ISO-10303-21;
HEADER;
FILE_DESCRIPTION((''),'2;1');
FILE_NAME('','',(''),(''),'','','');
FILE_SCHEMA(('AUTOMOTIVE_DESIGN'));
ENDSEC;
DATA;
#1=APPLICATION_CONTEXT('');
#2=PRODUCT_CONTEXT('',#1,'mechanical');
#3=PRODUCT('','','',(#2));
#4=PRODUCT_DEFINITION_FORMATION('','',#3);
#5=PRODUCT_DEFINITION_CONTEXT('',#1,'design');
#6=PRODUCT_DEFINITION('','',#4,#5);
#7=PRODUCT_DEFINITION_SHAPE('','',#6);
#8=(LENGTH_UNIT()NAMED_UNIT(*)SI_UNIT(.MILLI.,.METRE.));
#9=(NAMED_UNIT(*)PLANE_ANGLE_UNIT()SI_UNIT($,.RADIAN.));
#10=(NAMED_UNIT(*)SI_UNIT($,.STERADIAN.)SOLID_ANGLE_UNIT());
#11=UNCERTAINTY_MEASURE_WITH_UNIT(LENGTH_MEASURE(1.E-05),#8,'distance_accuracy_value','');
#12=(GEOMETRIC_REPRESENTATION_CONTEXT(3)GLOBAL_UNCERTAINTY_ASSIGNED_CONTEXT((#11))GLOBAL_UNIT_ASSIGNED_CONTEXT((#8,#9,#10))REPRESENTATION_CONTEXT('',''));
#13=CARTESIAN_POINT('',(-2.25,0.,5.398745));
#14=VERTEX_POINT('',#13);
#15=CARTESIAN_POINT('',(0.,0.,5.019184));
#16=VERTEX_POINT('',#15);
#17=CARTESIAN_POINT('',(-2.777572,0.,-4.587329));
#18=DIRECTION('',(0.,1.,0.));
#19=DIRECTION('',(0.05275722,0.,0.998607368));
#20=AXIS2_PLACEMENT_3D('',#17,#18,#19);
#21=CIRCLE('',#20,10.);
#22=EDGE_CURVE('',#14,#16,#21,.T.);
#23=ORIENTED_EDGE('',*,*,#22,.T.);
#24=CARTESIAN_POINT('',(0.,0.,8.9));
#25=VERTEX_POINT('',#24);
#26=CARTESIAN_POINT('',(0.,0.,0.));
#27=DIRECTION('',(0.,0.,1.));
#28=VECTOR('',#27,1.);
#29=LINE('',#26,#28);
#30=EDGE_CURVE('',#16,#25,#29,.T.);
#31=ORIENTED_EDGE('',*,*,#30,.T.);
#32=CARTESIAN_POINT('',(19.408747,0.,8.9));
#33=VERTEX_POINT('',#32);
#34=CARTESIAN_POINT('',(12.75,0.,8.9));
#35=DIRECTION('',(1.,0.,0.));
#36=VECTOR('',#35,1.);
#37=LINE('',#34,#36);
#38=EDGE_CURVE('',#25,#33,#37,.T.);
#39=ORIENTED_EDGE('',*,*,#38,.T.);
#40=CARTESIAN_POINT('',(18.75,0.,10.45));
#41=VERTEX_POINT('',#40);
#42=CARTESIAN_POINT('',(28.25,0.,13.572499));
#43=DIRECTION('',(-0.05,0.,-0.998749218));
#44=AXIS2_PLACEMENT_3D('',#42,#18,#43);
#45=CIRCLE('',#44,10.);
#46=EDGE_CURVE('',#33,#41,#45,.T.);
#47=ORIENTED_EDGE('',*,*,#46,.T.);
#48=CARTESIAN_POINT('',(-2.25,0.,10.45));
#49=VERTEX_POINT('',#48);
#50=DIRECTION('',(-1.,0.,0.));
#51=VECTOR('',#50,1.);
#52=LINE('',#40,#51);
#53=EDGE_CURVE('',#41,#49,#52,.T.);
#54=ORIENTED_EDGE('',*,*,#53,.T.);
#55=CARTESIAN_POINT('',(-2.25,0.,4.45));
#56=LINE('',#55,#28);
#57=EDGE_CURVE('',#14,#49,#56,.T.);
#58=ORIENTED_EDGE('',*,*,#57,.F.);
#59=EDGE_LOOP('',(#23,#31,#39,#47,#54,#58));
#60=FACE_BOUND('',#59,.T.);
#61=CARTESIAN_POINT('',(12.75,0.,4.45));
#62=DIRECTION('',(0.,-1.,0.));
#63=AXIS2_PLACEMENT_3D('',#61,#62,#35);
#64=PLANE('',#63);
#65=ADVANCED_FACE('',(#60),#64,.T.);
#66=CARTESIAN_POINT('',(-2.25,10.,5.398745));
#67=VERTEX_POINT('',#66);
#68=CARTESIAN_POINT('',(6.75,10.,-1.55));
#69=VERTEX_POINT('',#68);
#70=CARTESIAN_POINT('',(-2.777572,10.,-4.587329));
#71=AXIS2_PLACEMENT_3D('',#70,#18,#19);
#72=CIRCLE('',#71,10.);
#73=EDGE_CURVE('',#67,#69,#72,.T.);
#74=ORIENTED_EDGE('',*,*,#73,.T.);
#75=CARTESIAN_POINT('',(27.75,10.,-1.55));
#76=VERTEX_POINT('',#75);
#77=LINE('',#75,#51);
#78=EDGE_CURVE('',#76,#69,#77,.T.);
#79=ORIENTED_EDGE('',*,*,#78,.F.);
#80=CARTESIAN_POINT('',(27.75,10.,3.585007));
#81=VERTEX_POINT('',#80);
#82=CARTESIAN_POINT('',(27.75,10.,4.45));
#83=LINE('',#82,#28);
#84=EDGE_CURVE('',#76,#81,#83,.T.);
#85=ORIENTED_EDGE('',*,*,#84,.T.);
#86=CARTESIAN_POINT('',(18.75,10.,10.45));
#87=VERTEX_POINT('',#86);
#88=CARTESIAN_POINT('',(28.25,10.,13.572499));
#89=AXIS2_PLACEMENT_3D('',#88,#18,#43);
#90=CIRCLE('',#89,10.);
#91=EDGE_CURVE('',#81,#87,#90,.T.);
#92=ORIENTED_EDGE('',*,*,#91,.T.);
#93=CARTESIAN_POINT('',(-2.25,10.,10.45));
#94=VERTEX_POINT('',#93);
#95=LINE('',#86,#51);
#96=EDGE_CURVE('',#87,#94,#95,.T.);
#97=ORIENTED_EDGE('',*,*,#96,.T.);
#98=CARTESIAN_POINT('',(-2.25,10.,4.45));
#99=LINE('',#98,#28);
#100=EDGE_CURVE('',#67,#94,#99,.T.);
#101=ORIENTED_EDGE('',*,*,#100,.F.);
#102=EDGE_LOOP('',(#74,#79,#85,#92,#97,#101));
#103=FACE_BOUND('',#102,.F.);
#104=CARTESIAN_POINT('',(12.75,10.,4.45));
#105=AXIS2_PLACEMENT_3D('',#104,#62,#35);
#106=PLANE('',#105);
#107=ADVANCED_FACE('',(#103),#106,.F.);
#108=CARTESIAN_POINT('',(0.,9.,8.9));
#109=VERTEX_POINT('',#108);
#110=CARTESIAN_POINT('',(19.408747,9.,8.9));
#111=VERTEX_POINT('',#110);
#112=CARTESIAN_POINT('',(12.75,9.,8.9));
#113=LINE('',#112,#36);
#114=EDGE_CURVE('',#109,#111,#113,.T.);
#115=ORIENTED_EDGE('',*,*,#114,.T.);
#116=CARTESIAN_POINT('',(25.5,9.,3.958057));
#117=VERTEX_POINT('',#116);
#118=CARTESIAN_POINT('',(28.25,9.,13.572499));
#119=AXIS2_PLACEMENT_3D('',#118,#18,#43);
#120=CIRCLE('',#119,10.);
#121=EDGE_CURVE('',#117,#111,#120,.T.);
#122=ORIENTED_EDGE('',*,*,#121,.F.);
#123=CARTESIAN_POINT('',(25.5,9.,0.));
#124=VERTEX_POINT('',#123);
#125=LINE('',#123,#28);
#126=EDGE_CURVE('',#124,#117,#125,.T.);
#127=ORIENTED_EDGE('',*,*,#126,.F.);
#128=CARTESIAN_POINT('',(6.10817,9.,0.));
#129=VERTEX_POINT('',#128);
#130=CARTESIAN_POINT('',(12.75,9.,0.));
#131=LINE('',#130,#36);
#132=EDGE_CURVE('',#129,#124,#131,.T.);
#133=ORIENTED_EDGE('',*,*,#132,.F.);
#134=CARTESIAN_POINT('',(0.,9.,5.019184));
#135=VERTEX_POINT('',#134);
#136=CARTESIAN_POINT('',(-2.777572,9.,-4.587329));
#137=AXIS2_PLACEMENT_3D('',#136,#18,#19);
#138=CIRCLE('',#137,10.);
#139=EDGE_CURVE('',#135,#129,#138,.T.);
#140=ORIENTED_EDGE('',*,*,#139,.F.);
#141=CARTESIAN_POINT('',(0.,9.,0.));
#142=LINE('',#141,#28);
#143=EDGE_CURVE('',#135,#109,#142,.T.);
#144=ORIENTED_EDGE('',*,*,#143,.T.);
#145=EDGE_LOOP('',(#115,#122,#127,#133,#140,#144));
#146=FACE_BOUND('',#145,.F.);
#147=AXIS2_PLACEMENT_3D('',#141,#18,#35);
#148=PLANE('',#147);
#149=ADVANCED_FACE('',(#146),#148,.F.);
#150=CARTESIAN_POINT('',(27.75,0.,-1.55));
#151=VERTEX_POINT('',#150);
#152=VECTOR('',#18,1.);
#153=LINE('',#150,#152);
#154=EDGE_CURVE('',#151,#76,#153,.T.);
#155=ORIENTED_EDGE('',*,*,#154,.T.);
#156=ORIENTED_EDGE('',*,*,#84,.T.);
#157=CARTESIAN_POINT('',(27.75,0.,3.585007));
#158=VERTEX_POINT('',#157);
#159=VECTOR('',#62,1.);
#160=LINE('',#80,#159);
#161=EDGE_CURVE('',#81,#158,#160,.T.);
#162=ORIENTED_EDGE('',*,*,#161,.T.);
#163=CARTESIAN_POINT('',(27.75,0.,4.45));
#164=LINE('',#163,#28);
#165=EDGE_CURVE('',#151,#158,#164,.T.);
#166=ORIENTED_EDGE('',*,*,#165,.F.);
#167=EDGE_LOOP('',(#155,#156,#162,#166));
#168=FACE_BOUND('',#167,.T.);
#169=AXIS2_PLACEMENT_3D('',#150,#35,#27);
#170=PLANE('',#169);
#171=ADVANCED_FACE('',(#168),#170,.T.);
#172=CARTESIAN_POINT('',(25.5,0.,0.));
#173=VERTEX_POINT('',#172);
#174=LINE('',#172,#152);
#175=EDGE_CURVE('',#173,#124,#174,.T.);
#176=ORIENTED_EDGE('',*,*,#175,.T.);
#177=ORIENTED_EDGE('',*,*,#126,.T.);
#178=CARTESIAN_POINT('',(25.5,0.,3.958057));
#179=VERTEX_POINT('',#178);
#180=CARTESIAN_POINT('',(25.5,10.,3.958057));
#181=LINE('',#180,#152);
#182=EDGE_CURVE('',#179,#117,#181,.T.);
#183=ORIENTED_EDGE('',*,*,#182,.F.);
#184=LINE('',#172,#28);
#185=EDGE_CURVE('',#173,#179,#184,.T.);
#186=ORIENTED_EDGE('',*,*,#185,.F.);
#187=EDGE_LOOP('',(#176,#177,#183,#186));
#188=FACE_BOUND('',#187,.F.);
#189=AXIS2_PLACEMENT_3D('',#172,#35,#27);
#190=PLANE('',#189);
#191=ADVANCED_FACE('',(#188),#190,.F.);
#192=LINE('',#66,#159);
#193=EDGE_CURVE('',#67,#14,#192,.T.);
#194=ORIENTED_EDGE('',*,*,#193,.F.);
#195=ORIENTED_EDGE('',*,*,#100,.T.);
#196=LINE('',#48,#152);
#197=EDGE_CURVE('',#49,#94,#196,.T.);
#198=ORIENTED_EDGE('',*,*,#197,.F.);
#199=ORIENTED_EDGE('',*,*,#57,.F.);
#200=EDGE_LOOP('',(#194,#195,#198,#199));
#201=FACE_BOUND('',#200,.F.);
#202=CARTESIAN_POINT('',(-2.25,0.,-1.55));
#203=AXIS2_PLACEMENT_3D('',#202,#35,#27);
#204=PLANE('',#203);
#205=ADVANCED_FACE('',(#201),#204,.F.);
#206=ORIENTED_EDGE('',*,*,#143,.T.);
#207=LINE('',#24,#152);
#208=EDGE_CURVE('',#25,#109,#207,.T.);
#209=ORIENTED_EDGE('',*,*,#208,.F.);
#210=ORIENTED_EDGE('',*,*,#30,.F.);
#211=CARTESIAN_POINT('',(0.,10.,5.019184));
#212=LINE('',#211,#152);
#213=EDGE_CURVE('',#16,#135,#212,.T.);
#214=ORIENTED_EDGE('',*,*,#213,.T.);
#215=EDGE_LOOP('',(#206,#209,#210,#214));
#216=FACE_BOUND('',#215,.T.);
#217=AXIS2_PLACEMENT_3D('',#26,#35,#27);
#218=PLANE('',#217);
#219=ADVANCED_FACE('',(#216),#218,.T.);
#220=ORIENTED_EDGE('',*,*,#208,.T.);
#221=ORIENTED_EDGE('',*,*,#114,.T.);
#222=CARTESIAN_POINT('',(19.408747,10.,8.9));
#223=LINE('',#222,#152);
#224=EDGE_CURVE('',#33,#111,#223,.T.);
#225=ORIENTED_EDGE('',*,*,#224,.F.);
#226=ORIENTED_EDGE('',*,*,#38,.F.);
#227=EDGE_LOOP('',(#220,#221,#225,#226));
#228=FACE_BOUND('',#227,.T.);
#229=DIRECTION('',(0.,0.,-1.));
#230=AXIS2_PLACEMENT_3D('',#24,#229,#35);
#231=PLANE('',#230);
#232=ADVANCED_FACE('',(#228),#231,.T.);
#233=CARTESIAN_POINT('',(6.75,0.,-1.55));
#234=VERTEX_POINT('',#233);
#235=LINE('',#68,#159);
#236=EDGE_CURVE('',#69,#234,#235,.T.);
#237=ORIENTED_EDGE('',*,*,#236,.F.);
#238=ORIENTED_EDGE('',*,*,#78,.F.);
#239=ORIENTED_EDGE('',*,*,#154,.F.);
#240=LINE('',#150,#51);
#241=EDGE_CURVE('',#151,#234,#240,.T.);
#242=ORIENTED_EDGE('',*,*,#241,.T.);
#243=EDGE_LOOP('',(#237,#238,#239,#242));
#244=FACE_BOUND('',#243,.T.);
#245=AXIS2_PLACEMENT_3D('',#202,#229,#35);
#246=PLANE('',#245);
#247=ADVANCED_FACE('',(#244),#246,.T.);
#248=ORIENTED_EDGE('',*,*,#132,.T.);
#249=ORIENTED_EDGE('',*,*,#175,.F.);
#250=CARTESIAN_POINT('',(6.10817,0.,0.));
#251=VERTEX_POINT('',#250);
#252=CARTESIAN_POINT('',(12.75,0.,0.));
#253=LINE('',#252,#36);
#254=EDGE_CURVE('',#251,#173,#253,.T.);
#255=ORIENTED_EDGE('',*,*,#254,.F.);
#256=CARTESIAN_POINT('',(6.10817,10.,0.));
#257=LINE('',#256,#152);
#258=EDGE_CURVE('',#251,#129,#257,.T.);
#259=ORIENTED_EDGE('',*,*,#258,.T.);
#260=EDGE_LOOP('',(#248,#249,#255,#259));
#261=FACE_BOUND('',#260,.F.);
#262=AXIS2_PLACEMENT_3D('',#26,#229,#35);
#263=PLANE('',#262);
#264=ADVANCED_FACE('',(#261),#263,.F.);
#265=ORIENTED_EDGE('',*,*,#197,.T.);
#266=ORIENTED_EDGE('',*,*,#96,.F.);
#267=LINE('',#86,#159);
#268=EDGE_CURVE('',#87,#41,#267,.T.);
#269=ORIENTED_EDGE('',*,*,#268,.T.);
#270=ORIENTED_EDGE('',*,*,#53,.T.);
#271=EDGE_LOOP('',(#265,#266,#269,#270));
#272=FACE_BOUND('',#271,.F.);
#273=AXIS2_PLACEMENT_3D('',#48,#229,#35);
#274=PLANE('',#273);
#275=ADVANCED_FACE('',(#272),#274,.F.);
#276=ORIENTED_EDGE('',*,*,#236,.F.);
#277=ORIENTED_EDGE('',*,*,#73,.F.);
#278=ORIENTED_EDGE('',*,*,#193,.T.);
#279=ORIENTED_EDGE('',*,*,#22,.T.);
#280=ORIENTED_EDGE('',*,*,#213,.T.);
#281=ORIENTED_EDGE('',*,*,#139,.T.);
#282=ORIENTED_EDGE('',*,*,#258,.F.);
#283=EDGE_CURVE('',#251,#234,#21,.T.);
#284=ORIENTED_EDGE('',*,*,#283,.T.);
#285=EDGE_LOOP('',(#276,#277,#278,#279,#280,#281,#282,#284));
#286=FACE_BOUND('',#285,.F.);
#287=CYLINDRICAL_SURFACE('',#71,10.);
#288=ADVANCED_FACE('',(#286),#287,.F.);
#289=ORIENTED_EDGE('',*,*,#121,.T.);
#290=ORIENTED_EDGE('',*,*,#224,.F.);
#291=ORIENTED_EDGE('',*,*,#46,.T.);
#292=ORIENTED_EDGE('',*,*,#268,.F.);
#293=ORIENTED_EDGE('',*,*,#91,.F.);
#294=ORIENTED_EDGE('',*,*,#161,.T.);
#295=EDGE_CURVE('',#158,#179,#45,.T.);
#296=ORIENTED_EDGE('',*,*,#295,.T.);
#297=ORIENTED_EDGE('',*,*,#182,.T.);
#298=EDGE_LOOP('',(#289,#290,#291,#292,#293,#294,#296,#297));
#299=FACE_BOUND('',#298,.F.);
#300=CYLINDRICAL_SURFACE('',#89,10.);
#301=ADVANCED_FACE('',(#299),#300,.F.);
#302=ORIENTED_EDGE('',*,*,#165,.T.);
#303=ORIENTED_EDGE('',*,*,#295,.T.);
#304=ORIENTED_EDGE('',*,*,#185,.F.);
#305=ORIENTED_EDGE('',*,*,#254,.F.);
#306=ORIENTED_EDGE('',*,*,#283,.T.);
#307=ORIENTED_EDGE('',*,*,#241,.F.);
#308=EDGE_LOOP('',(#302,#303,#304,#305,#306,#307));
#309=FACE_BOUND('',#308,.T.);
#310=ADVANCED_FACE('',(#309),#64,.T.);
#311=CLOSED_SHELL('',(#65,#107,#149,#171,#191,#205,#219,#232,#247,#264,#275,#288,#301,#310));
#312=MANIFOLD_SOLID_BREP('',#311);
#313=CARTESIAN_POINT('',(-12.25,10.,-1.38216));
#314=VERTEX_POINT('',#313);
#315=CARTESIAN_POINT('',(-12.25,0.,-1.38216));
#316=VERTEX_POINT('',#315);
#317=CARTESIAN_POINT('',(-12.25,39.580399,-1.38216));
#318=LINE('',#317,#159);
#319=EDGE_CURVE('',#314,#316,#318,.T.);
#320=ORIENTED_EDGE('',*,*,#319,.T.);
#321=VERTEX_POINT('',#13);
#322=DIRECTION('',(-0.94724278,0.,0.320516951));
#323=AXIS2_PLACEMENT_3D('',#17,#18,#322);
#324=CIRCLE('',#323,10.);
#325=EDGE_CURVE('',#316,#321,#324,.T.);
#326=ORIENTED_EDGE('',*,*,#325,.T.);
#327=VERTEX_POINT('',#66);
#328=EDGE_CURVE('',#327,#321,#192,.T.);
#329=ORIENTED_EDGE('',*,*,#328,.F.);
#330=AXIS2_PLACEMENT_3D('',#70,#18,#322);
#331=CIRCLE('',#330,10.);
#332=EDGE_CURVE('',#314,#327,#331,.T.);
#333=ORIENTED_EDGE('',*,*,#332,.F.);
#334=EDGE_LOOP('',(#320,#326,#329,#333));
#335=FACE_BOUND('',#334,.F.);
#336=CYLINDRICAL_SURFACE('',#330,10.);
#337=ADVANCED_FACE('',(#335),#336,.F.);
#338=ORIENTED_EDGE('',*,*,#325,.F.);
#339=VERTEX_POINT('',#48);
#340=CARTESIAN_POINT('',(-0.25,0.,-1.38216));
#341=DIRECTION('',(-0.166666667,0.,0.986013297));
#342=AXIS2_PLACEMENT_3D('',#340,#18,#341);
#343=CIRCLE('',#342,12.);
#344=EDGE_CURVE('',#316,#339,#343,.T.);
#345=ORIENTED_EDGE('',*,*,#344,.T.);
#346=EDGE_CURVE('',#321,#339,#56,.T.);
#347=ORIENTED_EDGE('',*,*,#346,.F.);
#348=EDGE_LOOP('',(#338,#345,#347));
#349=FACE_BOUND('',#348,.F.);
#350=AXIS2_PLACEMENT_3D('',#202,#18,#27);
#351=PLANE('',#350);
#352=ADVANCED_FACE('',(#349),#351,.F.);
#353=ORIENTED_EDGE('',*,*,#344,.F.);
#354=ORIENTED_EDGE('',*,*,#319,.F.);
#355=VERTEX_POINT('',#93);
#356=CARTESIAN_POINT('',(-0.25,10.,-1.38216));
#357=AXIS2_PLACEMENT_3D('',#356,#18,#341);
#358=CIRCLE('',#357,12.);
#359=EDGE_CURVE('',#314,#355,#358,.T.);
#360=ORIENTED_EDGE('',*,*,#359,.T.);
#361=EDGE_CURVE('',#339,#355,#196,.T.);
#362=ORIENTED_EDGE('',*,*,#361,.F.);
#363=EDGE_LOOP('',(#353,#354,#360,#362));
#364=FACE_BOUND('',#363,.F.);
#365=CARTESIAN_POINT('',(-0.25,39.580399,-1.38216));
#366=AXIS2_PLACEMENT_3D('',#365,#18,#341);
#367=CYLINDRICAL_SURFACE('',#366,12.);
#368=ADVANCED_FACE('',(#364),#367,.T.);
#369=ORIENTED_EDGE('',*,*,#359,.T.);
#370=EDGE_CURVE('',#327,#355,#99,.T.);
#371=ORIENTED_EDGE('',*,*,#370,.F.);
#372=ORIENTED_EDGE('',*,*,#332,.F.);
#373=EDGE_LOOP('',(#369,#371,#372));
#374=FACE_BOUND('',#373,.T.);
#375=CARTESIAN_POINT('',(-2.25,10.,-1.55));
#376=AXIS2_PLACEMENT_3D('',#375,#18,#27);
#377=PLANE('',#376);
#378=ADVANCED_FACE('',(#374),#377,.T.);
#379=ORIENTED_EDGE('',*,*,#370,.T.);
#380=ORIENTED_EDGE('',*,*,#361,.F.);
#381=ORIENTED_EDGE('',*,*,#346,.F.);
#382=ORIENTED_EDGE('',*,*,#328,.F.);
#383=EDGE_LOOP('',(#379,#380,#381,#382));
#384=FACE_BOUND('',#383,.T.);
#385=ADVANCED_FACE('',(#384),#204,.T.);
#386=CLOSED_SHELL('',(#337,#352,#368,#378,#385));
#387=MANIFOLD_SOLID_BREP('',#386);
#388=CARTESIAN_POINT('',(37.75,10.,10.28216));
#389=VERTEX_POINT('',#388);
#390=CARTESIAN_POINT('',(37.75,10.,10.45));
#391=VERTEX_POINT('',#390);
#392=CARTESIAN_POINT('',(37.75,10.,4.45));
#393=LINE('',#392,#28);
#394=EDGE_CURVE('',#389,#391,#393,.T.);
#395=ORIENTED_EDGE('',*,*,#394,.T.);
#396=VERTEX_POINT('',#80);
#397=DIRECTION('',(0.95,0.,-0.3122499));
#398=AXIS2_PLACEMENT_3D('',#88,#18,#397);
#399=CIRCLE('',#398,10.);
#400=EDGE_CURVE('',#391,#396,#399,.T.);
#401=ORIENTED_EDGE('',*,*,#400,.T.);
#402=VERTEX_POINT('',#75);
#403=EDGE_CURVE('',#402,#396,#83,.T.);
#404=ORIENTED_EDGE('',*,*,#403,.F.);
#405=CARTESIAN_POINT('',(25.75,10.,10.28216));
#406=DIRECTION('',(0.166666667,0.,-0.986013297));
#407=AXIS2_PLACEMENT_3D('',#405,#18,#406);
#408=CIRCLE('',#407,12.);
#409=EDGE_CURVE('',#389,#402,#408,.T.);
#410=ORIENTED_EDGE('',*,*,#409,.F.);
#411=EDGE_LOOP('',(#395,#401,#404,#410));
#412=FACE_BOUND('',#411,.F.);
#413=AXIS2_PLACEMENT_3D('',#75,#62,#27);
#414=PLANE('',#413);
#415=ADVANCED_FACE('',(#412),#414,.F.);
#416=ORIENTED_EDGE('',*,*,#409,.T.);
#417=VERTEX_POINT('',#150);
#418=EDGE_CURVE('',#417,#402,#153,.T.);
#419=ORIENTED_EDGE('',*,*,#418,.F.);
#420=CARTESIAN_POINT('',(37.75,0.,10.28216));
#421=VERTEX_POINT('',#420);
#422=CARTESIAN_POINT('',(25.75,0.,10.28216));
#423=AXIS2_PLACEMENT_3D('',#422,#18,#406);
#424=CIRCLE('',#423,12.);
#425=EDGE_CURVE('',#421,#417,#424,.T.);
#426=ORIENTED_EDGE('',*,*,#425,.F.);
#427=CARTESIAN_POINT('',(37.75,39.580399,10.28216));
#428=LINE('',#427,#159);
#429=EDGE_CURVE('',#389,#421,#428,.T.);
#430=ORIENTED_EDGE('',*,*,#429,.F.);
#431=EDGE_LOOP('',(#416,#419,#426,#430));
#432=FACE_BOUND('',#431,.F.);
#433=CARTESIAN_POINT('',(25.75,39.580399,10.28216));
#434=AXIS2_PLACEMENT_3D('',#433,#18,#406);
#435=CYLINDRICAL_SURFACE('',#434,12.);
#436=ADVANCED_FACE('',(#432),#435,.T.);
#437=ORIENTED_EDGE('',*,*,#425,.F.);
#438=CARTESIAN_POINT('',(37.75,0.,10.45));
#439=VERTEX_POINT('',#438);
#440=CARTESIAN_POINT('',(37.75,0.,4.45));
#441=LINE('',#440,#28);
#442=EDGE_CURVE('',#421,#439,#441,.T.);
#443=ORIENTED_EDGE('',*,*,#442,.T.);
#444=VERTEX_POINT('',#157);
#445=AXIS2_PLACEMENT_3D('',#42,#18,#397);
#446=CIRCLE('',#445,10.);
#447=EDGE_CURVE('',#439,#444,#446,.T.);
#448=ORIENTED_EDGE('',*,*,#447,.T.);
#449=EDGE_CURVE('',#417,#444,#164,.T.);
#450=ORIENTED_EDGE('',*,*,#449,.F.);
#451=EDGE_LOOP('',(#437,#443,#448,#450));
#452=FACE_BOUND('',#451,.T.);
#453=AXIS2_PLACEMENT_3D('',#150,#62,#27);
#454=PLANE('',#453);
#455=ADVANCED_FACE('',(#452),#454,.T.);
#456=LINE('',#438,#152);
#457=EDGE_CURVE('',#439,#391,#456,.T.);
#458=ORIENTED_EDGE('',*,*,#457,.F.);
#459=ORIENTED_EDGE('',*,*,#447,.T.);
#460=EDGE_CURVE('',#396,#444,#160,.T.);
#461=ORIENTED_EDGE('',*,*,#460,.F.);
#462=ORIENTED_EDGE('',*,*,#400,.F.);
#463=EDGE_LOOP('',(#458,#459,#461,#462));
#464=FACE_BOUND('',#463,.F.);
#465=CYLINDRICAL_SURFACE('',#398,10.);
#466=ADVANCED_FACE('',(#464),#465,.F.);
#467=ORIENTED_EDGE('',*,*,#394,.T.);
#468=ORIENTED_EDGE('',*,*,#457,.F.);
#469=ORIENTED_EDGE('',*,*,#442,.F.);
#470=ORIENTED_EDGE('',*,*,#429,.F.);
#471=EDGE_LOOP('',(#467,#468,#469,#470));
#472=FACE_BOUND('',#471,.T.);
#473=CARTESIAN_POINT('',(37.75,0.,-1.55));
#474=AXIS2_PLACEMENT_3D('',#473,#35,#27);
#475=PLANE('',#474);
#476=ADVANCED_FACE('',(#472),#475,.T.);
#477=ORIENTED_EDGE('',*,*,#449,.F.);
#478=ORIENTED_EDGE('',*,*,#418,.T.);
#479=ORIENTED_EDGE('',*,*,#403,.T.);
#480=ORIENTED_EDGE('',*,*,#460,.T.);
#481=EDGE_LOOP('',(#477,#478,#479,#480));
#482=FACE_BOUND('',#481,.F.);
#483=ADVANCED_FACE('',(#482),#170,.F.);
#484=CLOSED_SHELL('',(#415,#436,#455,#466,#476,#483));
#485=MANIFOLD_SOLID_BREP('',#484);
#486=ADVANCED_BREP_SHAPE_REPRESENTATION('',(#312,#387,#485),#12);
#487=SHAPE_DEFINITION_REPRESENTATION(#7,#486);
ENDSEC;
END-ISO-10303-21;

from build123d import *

# Parameters (mm, degrees)
F0_W          = 25.5
F0_H          = 8.9
F1_DEPTH      = 8.9
F2_W          = 30
F2_H          = 12
F2_W_2        = 25.5
F2_H_2        = 8.9
F3_DEPTH      = 10
F4_DEPTH      = 9
F5_DEPTH      = 10
F6_DEPTH      = 10
F9_T1_DEPTH   = 69.160797831
F9_2_T1_DEPTH = 69.160797831
F11_DEPTH     = 10


# Not quite as in the source:
# - a fillet or chamfer that OpenCascade refuses, or shapes differently, is made with other operations: its cross-section is extruded or revolved along the edge and cut away or added


with BuildPart() as f1:
    # F0 (on Top) → F1 (new body)
    with BuildSketch(Plane.XY):
        with Locations((12.75, 4.45)):
            Rectangle(F0_W, F0_H)
    extrude(amount=F1_DEPTH)


with BuildPart() as f3:
    # F2 (on face) → F3 (new body)
    with BuildSketch(Plane.XZ):
        with Locations((12.75, 4.45)):
            Rectangle(F2_W, F2_H)
        with Locations((12.75, 4.45)):
            Rectangle(F2_W_2, F2_H_2, mode=Mode.SUBTRACT)
        with Locations((12.75, 4.45)):
            Rectangle(F2_W_2, F2_H_2)
    extrude(amount=-F3_DEPTH)


with BuildPart() as f4_tool:
    # F4 (cut): a face of the model
    f4_faces = [f1.part.faces().sort_by_distance(p)[0] for p in [
        (12.75, 0, 4.45),
    ]]
    extrude(f4_faces, amount=-F4_DEPTH)


with BuildPart() as f1_1:
    add(f1.part)

    # F4: cut by f4_tool
    add(f4_tool.part, mode=Mode.SUBTRACT)


with BuildPart() as f3_1:
    add(f3.part)

    # F4: cut by f4_tool
    add(f4_tool.part, mode=Mode.SUBTRACT)


with BuildPart() as f5:
    # F5 (new): a face of the model
    f5_faces = [f3_1.part.faces().sort_by_distance(p)[0] for p in [
        (-2.25, 5, 4.45),
    ]]
    extrude(f5_faces, amount=F5_DEPTH)

    # F9: fillet of radius 12 on 1 edges, made by hand

    # F9_s2 → F9_t1 (cut)
    with BuildSketch(Plane.XZ.offset(-39.5803989155)):
        with BuildLine():
            ThreePointArc((-2.25, 10.45), (-9.4151513899, 6.3638071262), (-12.25, -1.3821595662))
            Line((-12.25, -1.3821595662), (-12.25, 10.45))
            Line((-12.25, 10.45), (-2.25, 10.45))
        make_face()
    extrude(amount=F9_T1_DEPTH, mode=Mode.SUBTRACT)


with BuildPart() as f6:
    # F6 (new): a face of the model
    f6_faces = [f3_1.part.faces().sort_by_distance(p)[0] for p in [
        (27.75, 5, 4.45),
    ]]
    extrude(f6_faces, amount=F6_DEPTH)

    # F9#2: fillet of radius 12 on 1 edges, made by hand

    # F9_2_s2 → F9_2_t1 (cut)
    with BuildSketch(Plane.XZ.offset(-39.5803989155)):
        with BuildLine():
            ThreePointArc((27.75, -1.55), (34.9151513899, 2.5361928738), (37.75, 10.2821595662))
            Line((37.75, 10.2821595662), (37.75, -1.55))
            Line((37.75, -1.55), (27.75, -1.55))
        make_face()
    extrude(amount=F9_2_T1_DEPTH, mode=Mode.SUBTRACT)


with BuildPart() as f11_tool:
    # F10 (on face) → F11 (new body)
    with BuildSketch(Plane(origin=(0, 10, 0), x_dir=(-1, 0, 0), z_dir=(0, 1, 0))):
        with BuildLine():
            Line((-27.75, 3.5850068215), (-27.75, 10.45))
            Line((-27.75, 10.45), (-37.75, 10.45))
            ThreePointArc((-37.75, 10.45), (-33.9096848707, 5.3282302527), (-27.75, 3.5850068215))
        make_face()
        with BuildLine():
            ThreePointArc((-27.75, 3.5850068215), (-22.1851807253, 5.6215262811), (-18.75, 10.45))
            Line((-18.75, 10.45), (-27.75, 10.45))
            Line((-27.75, 10.45), (-27.75, 3.5850068215))
        make_face()
        with BuildLine():
            ThreePointArc((-6.75, 29.45), (-13.6275010008, 19.95), (-6.75, 10.45))
            Line((-6.75, 10.45), (-6.75, 29.45))
        make_face()
        with BuildLine():
            Line((2.25, 5.3987446019), (2.25, -1.55))
            Line((2.25, -1.55), (12.25, -1.55))
            Line((12.25, -1.55), (12.25, -1.3821595662))
            ThreePointArc((12.25, -1.3821595662), (8.389860126, 3.6892779702), (2.25, 5.3987446019))
        make_face()
        with BuildLine():
            ThreePointArc((2.25, 5.3987446019), (-3.3337079529, 3.3279886569), (-6.75, -1.55))
            Line((-6.75, -1.55), (2.25, -1.55))
            Line((2.25, -1.55), (2.25, 5.3987446019))
        make_face()
        with BuildLine():
            ThreePointArc((-18.75, -20.55), (-11.8724989992, -11.05), (-18.75, -1.55))
            Line((-18.75, -1.55), (-18.75, -20.55))
        make_face()
    extrude(amount=-F11_DEPTH)


with BuildPart() as f3_2:
    add(f3_1.part)

    # F11: cut by f11_tool
    add(f11_tool.part, mode=Mode.SUBTRACT)


with BuildPart() as f5_1:
    add(f5.part)

    # F11: cut by f11_tool
    add(f11_tool.part, mode=Mode.SUBTRACT)


with BuildPart() as f6_1:
    add(f6.part)

    # F11: cut by f11_tool
    add(f11_tool.part, mode=Mode.SUBTRACT)


solid = Compound([f3_2.part, f5_1.part, f6_1.part])
